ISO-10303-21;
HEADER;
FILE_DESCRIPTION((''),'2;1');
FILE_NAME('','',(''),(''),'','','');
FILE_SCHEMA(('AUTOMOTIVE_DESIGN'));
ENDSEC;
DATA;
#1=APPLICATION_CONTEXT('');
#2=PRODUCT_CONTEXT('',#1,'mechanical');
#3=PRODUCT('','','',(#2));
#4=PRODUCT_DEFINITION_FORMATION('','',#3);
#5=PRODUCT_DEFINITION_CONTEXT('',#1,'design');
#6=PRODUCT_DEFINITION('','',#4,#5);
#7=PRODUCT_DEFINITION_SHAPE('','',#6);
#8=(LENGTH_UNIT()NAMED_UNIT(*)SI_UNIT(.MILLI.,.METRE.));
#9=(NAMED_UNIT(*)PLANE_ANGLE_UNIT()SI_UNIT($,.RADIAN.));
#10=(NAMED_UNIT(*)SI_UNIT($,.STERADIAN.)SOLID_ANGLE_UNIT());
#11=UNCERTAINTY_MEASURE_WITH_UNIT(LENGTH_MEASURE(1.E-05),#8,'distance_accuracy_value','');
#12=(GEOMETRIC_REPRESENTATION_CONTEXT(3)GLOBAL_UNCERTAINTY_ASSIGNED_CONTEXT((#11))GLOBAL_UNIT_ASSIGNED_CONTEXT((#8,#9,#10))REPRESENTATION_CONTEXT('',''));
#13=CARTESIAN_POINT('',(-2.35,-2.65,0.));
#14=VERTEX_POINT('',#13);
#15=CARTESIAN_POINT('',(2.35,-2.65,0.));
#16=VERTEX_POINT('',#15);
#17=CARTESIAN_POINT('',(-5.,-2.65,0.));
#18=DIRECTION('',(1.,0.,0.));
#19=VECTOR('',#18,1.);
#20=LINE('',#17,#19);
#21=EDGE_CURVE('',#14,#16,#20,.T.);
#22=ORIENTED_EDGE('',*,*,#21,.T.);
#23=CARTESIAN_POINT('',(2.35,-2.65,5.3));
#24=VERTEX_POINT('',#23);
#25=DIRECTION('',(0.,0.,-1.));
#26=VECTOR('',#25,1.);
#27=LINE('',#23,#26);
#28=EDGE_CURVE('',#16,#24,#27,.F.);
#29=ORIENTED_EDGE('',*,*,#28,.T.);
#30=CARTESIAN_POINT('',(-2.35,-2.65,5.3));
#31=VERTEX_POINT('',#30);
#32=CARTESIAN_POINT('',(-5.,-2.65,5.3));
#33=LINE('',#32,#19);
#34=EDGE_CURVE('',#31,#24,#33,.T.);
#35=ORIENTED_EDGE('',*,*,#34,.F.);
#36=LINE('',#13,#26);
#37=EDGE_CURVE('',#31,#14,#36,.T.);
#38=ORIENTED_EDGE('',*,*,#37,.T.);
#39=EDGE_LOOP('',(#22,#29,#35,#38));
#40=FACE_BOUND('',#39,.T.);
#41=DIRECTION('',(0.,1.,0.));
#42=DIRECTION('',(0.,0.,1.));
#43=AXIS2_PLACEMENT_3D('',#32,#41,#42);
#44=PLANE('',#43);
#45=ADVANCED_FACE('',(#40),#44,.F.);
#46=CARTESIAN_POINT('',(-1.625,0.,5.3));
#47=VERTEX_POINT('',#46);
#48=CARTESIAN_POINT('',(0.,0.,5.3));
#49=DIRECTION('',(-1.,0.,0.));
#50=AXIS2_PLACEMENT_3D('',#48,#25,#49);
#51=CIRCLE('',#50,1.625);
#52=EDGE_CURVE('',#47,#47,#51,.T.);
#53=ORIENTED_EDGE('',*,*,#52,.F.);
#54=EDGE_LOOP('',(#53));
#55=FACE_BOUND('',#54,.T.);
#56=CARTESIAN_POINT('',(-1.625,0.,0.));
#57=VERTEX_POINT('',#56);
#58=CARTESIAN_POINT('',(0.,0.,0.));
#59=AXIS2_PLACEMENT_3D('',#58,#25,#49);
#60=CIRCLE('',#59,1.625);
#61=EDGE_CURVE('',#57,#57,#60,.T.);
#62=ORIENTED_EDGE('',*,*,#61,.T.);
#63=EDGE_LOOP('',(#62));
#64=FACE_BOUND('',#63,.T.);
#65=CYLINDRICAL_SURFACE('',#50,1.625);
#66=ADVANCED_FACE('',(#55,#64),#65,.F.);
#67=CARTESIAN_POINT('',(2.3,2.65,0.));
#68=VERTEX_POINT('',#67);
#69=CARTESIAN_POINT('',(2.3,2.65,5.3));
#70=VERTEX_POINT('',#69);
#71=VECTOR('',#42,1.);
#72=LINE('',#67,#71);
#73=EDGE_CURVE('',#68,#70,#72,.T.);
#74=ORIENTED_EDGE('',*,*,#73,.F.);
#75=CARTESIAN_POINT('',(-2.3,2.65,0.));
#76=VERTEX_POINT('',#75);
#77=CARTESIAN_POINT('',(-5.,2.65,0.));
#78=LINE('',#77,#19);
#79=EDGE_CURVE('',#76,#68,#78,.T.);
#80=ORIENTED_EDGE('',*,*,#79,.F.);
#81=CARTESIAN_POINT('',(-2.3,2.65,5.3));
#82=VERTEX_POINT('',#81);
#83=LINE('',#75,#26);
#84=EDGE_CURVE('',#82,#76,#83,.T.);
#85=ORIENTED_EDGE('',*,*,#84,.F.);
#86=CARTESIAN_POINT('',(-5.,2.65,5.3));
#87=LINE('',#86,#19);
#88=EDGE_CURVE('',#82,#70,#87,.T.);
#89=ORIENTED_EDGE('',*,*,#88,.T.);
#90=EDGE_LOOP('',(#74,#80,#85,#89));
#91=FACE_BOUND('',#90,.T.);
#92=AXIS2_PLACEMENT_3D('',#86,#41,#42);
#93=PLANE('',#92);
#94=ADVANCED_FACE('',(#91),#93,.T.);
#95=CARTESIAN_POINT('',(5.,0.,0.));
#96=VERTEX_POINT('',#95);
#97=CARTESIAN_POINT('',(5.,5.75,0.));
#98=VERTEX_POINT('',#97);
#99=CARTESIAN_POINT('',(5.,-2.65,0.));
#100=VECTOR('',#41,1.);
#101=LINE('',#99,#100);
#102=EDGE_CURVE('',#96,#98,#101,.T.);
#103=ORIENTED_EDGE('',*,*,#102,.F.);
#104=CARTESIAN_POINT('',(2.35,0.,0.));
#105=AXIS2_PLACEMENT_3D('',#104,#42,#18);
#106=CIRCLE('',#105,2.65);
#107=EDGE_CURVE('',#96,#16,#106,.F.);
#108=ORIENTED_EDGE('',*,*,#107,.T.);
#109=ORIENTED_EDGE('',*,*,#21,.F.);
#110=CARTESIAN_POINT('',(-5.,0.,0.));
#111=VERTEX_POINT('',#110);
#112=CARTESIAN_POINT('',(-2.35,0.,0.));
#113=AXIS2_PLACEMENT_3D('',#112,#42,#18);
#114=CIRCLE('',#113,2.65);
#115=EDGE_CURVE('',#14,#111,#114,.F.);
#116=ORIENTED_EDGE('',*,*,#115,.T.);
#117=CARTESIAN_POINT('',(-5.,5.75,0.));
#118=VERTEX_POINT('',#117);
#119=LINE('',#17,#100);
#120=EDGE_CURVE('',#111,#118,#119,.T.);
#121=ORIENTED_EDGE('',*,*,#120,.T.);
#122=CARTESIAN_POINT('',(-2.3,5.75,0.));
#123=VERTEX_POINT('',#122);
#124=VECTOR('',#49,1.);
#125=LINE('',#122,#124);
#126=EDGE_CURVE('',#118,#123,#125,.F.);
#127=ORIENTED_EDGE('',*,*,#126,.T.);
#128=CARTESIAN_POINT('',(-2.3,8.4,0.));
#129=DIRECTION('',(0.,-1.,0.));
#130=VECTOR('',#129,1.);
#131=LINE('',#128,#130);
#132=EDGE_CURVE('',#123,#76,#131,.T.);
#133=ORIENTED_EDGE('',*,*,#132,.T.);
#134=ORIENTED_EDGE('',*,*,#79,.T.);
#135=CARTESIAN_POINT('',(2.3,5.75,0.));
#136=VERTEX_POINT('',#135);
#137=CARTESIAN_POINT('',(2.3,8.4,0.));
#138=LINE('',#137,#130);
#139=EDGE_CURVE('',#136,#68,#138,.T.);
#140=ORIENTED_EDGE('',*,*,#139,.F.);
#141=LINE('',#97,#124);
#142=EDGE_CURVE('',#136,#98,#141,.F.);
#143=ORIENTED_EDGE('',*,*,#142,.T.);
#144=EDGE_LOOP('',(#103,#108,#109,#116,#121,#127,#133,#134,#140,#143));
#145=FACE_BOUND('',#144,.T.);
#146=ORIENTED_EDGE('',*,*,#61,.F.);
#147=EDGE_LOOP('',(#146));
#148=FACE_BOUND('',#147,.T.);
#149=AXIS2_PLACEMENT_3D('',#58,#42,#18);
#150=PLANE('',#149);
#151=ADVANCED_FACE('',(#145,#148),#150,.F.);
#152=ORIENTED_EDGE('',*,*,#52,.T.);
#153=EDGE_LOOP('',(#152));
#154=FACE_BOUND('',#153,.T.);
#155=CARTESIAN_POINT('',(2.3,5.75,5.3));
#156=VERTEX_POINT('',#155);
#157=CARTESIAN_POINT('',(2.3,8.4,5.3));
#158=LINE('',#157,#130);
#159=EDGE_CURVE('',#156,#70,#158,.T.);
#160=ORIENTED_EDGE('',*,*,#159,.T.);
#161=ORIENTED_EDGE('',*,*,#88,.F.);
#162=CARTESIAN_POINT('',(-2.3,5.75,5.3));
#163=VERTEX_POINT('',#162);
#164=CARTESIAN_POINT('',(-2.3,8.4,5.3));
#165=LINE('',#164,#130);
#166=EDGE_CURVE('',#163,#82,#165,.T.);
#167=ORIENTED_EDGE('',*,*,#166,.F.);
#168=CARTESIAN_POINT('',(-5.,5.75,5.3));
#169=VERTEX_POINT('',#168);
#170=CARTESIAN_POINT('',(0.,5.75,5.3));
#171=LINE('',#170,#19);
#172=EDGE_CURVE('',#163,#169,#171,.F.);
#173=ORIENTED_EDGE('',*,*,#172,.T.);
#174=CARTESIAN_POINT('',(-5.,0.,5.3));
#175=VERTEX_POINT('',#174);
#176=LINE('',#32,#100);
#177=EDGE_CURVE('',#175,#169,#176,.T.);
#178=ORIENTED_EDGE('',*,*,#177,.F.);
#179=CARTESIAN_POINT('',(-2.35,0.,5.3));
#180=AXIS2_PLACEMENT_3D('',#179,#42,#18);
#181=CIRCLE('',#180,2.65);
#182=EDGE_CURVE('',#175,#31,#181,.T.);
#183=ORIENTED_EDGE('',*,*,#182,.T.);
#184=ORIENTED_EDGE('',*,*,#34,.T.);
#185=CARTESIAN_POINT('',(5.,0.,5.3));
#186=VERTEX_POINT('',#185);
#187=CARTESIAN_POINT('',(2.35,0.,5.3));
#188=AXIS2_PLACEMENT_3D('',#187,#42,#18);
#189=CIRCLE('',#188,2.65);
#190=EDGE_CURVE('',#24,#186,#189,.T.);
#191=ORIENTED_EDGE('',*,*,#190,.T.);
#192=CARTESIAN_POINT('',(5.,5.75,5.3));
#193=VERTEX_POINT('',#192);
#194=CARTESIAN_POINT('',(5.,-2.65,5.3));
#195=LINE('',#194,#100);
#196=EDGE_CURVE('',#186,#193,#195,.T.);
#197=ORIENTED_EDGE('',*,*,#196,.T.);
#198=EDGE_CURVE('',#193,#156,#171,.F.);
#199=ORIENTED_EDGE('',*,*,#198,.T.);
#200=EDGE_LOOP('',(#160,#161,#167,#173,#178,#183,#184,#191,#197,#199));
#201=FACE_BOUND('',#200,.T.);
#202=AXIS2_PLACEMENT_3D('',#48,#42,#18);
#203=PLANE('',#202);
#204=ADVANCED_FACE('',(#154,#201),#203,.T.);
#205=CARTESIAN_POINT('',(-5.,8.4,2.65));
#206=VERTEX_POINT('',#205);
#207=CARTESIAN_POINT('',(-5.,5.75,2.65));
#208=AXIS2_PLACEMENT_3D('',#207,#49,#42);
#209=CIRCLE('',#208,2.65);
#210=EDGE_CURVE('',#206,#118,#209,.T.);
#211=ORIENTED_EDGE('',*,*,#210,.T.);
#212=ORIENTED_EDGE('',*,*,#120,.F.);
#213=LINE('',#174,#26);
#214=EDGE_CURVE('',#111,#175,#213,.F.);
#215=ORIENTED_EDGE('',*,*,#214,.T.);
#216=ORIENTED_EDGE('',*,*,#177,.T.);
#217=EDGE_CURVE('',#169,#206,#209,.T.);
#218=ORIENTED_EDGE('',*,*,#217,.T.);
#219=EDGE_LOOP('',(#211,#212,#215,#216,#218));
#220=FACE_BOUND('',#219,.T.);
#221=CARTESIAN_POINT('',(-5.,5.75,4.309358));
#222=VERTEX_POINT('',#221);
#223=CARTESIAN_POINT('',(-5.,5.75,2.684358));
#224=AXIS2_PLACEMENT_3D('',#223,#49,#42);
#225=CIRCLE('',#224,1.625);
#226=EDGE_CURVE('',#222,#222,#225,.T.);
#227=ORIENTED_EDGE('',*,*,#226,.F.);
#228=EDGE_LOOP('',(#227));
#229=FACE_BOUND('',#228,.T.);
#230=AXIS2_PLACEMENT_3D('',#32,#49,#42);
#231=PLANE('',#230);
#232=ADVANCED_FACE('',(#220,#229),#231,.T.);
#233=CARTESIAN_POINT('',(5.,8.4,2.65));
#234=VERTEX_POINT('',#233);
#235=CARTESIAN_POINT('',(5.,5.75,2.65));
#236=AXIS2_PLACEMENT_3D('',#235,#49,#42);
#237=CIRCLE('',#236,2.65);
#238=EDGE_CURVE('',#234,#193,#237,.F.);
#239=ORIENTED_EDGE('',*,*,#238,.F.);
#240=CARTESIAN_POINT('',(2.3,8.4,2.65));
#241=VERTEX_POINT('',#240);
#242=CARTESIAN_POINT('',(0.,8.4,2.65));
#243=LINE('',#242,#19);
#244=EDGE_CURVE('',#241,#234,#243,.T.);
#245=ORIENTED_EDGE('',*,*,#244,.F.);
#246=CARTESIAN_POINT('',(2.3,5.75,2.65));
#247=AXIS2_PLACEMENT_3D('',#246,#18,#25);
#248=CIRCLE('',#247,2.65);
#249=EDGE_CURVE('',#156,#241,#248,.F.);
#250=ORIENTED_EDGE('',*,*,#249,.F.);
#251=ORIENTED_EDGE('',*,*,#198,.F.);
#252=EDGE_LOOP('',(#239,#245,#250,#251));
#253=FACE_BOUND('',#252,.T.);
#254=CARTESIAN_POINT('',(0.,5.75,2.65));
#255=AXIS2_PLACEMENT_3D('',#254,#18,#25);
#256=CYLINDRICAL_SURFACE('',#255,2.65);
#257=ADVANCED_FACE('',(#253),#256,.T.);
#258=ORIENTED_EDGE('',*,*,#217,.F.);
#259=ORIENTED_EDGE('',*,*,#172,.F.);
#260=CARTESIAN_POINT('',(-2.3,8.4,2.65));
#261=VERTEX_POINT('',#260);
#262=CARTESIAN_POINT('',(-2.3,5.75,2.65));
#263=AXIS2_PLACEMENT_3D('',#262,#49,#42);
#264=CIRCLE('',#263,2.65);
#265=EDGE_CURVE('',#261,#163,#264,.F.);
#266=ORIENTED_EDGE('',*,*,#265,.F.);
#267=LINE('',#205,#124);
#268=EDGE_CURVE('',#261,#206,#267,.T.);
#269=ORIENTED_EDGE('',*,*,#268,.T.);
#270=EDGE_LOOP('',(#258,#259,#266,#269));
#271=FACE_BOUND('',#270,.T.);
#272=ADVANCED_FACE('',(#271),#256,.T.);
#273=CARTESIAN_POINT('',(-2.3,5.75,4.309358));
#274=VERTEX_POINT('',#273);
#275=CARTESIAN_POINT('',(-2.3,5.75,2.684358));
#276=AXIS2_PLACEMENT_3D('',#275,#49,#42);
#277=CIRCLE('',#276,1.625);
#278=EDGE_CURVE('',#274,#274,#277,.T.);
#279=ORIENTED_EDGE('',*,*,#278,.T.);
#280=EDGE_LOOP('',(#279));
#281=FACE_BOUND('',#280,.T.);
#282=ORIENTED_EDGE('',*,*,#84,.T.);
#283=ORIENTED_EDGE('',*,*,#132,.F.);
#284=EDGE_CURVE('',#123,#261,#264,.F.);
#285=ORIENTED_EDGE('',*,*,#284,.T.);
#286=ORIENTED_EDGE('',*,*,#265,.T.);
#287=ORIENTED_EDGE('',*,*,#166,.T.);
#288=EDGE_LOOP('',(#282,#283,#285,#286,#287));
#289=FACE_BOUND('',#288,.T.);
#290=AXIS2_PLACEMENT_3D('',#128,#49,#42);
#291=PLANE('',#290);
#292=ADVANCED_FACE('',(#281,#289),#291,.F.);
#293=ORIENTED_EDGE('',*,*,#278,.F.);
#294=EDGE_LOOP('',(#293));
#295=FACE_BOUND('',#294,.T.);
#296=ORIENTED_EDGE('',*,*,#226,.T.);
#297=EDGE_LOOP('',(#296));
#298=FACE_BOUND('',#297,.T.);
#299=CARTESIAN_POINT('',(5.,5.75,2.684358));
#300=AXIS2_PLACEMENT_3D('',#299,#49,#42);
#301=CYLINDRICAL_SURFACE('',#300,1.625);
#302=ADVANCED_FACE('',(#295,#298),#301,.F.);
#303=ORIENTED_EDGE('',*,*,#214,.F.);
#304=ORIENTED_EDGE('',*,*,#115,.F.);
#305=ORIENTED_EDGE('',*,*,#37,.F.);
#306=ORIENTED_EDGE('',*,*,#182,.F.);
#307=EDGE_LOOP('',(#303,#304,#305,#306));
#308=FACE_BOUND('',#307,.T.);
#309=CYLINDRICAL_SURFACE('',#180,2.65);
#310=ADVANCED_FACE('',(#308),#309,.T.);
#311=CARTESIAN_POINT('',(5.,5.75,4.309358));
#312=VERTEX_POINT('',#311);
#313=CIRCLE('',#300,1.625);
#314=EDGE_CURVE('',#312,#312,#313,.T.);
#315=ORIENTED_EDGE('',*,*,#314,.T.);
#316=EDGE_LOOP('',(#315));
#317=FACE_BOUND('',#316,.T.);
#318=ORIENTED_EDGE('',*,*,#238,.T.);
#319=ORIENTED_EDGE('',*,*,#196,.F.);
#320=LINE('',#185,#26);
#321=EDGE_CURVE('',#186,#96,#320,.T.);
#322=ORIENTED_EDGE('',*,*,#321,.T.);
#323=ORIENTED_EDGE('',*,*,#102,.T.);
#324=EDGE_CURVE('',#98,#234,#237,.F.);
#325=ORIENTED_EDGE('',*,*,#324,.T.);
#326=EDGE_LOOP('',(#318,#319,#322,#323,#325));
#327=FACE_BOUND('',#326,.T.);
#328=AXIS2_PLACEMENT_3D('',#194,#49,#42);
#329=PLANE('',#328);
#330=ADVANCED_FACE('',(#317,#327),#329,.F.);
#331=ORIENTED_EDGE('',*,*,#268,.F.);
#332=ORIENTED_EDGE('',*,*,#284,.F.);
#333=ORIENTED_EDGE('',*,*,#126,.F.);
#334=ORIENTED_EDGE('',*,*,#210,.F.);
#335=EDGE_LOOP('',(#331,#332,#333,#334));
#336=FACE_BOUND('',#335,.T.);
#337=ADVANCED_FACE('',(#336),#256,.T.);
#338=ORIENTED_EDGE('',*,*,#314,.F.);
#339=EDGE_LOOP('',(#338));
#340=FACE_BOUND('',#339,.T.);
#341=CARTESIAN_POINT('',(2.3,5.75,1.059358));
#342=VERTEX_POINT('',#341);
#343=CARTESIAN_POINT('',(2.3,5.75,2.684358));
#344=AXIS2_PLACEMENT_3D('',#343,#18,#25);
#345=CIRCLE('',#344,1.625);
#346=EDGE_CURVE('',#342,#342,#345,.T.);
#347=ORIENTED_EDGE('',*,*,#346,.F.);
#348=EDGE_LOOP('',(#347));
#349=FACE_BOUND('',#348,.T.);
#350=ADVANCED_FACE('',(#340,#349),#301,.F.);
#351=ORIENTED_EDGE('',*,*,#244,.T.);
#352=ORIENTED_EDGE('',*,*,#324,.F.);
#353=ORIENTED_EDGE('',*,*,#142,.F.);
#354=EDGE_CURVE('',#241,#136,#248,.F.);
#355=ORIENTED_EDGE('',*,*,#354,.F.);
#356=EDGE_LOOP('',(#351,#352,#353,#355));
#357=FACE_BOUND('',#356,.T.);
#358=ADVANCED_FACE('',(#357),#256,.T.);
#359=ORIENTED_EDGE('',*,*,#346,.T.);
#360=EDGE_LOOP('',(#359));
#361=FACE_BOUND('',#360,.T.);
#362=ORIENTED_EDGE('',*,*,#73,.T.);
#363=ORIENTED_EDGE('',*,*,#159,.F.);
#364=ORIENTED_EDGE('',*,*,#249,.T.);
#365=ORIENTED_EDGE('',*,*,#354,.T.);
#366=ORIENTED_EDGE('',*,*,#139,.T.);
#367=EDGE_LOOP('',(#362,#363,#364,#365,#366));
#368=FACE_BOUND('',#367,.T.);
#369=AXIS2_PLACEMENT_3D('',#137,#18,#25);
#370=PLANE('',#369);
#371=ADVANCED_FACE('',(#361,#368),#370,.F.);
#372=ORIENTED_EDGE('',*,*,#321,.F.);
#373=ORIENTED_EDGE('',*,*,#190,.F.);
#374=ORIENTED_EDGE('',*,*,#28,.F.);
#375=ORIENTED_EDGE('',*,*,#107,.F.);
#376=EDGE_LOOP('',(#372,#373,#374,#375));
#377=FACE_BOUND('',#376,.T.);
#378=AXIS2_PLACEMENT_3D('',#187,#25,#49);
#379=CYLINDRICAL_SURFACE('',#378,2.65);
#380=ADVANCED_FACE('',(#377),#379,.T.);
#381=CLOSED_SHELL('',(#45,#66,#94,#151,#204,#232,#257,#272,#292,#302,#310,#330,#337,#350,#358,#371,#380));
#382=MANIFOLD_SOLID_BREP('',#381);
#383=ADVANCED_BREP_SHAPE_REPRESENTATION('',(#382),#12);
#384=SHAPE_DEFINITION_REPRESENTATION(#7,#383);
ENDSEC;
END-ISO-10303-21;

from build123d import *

# Parameters (mm, degrees)
SCHIZZO1_W                   = 10
SCHIZZO1_H                   = 5.3
ESTRUSIONE_ESTRUSIONE1_DEPTH = 5.3
SCHIZZO2_R                   = 1.625
TAGLIO_ESTRUSIONE3_DEPTH     = 8.753225135
SCHIZZO3_W                   = 2.7
SCHIZZO3_H                   = 5.3
ESTRUSIONE_ESTRUSIONE2_DEPTH = 5.75
SCHIZZO4_R                   = 1.625
TAGLIO_ESTRUSIONE4_DEPTH     = 15.094325099
RACCORDO2_R                  = 2.65
RACCORDO3_R                  = 2.65


with BuildPart() as part:
    # Schizzo1 → Estrusione-Estrusione1 (new body)
    with BuildSketch(Plane.XY):
        Rectangle(SCHIZZO1_W, SCHIZZO1_H)
    extrude(amount=ESTRUSIONE_ESTRUSIONE1_DEPTH)

    # Schizzo2 → Taglio-Estrusione3 (cut, through all)
    with BuildSketch(Plane(origin=(0, 0, 0), x_dir=(-1, 0, 0), z_dir=(0, 0, -1))):
        Circle(SCHIZZO2_R)
    extrude(amount=-TAGLIO_ESTRUSIONE3_DEPTH, mode=Mode.SUBTRACT)

    # Schizzo3 → Estrusione-Estrusione2 (add)
    with BuildSketch(Plane(origin=(0, 2.65, 0), x_dir=(1, 0, 0), z_dir=(0, 1, 0))):
        with Locations((3.65, -2.65)):
            Rectangle(SCHIZZO3_W, SCHIZZO3_H)
        with Locations((-3.65, -2.65)):
            Rectangle(SCHIZZO3_W, SCHIZZO3_H)
    extrude(amount=ESTRUSIONE_ESTRUSIONE2_DEPTH)

    # Schizzo4 → Taglio-Estrusione4 (cut, through all)
    with BuildSketch(Plane.ZY.offset(5)):
        with Locations((2.684358211, 5.75)):
            Circle(SCHIZZO4_R)
    extrude(amount=-TAGLIO_ESTRUSIONE4_DEPTH, mode=Mode.SUBTRACT)

    # Raccordo2
    raccordo2_edges = [part.edges().sort_by_distance(p)[0] for p in [
        (3.65, 8.4, 0),
        (3.65, 8.4, 5.3),
        (-3.65, 8.4, 5.3),
        (-3.65, 8.4, 0),
    ]]
    fillet(raccordo2_edges, radius=RACCORDO2_R - 0.0001)  # a hair under: the kernel refuses the full size

    # Raccordo3
    raccordo3_edges = [part.edges().sort_by_distance(p)[0] for p in [
        (-5, -2.65, 2.65),
        (5, -2.65, 2.65),
    ]]
    fillet(raccordo3_edges, radius=RACCORDO3_R)


solid = part.part
